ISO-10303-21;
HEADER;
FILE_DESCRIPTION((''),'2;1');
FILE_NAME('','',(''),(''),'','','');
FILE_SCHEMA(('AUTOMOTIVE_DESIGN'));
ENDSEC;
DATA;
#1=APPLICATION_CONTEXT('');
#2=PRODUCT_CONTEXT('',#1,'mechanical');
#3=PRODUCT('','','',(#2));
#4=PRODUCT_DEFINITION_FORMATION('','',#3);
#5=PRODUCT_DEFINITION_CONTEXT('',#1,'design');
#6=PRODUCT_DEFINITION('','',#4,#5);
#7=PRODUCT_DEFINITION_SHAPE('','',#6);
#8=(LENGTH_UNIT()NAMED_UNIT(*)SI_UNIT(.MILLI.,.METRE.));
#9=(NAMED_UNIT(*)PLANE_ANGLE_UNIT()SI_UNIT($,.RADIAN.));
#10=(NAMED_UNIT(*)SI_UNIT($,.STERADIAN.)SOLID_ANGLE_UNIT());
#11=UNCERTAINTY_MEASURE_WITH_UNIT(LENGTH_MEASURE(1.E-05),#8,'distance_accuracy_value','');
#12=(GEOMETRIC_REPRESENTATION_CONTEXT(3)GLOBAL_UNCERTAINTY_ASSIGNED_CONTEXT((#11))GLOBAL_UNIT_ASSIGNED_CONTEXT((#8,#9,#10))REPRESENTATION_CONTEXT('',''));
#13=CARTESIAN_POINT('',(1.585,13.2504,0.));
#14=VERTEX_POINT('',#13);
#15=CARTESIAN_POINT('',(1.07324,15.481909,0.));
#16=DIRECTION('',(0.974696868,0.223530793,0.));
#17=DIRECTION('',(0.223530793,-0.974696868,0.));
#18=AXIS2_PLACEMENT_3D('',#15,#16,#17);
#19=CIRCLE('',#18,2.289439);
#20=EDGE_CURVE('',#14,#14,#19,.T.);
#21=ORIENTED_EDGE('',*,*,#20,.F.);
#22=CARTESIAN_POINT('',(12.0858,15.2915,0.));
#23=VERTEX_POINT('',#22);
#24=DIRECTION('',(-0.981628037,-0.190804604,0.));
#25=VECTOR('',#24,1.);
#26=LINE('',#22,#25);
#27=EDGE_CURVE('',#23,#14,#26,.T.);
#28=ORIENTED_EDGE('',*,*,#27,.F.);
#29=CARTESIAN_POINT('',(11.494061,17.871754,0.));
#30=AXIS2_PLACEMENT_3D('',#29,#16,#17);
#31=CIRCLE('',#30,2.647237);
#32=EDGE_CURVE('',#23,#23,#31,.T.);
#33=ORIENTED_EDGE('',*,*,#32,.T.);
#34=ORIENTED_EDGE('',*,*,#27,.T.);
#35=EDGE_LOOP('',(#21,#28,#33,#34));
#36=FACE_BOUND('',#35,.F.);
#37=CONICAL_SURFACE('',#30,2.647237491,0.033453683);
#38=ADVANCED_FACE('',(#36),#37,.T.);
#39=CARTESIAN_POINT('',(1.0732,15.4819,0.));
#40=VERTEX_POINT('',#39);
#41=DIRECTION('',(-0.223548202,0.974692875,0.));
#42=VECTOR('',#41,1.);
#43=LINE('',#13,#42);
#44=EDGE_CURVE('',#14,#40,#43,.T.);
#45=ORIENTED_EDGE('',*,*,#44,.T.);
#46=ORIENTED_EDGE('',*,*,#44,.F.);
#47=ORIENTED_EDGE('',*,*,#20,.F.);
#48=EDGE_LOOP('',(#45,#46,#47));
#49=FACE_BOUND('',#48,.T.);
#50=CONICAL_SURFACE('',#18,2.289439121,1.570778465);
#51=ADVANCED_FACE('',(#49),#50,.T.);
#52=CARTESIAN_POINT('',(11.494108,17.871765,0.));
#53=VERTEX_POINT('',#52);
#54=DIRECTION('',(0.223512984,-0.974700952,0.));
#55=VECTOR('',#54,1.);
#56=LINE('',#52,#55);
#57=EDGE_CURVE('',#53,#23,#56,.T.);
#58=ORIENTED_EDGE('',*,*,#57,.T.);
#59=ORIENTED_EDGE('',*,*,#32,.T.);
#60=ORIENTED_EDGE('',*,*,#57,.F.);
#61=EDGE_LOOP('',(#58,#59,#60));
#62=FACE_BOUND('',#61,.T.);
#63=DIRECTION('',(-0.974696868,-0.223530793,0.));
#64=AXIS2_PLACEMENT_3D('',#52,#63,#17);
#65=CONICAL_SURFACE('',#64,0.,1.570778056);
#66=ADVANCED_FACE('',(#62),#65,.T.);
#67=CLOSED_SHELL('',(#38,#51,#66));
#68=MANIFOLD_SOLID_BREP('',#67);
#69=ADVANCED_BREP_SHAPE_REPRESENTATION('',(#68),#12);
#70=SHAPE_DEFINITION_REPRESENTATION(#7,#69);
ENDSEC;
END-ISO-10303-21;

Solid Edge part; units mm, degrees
sketch "Sketch1" plane through (0, 0, 0) normal (0, 0, 1) x (1, 0, 0)
  line L0 (11.4941, 17.8718) -> (12.0858, 15.2915)
  line L1 (12.0858, 15.2915) -> (1.585, 13.2504)
  line L2 (1.585, 13.2504) -> (1.0732, 15.4819)
  line L3 (1.0732, 15.4819) -> (11.4941, 17.8718)
revolve "RevolvedProtrusion1" add sketch "Sketch1" angle 360 about axis through (1.0732, 15.4819, 0) along (0.9746969, 0.2235308, 0)
properties part number "320/22 X_r"
